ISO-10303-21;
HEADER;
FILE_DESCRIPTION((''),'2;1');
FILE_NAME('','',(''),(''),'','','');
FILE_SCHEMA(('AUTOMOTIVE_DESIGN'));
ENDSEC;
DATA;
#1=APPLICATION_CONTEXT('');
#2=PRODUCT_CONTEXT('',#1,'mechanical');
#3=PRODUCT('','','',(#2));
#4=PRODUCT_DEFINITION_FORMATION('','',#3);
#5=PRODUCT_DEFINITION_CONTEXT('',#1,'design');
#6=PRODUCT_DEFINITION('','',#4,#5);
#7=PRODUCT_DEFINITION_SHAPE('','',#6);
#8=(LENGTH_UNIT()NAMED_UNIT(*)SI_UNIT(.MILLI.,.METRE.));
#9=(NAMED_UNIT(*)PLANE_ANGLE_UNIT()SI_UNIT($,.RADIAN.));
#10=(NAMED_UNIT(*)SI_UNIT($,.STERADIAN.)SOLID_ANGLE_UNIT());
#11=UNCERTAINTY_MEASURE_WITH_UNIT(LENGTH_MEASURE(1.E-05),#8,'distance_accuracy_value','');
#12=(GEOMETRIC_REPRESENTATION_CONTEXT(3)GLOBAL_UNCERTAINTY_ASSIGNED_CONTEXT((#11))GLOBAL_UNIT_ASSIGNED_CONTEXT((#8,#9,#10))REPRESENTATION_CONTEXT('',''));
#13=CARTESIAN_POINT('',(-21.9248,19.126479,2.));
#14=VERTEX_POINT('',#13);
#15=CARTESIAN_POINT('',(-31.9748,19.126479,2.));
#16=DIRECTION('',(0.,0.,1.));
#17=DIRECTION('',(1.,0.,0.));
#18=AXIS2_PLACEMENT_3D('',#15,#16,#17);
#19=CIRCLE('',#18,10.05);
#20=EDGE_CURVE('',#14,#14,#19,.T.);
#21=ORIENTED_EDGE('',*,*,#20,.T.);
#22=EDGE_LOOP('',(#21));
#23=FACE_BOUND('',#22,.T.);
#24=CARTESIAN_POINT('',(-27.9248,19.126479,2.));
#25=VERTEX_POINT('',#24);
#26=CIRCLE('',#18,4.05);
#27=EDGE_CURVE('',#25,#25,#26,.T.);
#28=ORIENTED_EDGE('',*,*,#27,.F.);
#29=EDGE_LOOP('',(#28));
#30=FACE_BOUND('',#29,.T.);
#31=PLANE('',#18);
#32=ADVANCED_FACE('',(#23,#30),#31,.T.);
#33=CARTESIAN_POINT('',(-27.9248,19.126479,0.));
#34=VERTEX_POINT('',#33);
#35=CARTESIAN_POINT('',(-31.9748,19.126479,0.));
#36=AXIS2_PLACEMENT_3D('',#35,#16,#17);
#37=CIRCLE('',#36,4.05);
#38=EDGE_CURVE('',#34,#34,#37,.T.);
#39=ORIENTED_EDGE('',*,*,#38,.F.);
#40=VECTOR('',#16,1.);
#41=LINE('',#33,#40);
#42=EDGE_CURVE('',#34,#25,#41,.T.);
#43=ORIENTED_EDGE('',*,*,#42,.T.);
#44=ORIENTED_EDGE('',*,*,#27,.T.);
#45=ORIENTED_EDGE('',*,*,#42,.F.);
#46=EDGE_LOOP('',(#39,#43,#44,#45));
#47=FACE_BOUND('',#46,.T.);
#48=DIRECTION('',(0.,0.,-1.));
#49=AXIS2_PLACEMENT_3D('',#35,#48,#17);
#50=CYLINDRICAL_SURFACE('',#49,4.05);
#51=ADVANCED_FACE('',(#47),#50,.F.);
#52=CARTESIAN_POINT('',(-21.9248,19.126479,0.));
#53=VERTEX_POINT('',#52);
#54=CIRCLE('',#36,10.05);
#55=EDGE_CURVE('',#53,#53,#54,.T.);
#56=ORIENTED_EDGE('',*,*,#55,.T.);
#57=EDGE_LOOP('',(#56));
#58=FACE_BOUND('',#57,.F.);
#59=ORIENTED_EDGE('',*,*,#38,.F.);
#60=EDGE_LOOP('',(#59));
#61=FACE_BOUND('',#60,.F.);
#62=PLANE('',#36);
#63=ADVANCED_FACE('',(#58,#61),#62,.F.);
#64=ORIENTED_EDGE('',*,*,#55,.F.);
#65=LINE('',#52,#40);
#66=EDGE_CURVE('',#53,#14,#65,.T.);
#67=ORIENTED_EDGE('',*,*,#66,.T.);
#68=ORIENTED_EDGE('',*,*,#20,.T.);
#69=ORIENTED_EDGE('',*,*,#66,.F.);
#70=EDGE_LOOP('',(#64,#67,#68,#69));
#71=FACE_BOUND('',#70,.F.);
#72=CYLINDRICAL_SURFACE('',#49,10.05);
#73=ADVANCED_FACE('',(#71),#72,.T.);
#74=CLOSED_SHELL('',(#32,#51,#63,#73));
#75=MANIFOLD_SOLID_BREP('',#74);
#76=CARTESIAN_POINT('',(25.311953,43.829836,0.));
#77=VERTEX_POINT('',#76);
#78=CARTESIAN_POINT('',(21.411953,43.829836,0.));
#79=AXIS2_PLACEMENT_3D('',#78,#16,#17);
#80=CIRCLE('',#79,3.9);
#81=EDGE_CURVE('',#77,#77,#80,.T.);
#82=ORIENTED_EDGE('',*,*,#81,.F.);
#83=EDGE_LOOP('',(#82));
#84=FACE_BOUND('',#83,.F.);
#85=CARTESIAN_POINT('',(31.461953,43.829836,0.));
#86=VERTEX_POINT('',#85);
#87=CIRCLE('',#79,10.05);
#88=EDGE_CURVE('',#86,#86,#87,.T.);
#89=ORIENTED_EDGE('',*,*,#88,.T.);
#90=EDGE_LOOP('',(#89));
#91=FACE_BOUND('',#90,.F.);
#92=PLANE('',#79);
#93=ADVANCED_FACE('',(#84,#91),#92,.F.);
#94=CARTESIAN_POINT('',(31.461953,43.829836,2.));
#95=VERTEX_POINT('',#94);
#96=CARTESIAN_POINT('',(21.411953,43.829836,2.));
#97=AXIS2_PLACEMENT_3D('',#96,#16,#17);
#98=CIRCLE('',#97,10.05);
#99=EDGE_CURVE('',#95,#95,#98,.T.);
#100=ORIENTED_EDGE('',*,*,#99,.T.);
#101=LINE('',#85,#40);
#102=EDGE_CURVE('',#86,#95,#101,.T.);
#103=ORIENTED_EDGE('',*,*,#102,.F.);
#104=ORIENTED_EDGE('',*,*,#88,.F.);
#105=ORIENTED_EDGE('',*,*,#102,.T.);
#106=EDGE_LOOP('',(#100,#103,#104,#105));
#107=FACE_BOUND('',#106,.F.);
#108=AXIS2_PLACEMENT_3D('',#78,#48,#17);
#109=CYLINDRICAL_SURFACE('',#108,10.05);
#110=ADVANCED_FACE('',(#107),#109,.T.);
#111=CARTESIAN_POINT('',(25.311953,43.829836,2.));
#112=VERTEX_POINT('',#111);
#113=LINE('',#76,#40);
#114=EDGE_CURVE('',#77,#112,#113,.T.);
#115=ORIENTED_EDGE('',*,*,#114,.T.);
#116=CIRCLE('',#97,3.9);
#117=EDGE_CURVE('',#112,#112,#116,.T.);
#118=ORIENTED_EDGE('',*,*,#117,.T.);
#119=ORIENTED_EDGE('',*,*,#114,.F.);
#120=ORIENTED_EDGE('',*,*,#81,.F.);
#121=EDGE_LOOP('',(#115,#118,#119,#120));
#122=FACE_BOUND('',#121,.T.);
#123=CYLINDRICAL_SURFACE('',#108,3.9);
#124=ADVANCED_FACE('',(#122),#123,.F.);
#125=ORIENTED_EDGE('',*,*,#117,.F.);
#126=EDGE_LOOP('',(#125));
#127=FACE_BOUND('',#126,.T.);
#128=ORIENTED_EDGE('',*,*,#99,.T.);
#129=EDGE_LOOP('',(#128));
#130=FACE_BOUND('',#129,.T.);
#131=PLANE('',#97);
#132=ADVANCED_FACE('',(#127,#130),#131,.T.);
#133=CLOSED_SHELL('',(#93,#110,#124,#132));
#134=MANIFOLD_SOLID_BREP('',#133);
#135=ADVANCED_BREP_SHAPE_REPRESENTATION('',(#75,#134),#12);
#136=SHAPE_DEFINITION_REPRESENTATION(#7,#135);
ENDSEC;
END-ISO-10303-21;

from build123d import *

# Parameters (mm, degrees)
F0_R     = 10.05
F0_R_2   = 4.05
F1_DEPTH = 2
F0_R_3   = 3.9


# Not quite as in the source:
# - the program builds the solid bodies; features that only make, move or delete a surface that nothing else refers to are left out


with BuildPart() as f1:
    # F0 (on Top) → F1 (new body)
    with BuildSketch(Plane.XY):
        with Locations((-31.974799931, 19.1264785826)):
            Circle(F0_R)
        with Locations((-31.974799931, 19.1264785826)):
            Circle(F0_R_2, mode=Mode.SUBTRACT)
    extrude(amount=F1_DEPTH)


with BuildPart() as f1b:
    # F0 (on Top) → F1, piece 2 (new body)
    with BuildSketch(Plane.XY):
        with Locations((21.411953494, 43.8298359513)):
            Circle(F0_R)
        with Locations((21.411953494, 43.8298359513)):
            Circle(F0_R_3, mode=Mode.SUBTRACT)
    extrude(amount=F1_DEPTH)


solid = Compound([f1.part, f1b.part])
